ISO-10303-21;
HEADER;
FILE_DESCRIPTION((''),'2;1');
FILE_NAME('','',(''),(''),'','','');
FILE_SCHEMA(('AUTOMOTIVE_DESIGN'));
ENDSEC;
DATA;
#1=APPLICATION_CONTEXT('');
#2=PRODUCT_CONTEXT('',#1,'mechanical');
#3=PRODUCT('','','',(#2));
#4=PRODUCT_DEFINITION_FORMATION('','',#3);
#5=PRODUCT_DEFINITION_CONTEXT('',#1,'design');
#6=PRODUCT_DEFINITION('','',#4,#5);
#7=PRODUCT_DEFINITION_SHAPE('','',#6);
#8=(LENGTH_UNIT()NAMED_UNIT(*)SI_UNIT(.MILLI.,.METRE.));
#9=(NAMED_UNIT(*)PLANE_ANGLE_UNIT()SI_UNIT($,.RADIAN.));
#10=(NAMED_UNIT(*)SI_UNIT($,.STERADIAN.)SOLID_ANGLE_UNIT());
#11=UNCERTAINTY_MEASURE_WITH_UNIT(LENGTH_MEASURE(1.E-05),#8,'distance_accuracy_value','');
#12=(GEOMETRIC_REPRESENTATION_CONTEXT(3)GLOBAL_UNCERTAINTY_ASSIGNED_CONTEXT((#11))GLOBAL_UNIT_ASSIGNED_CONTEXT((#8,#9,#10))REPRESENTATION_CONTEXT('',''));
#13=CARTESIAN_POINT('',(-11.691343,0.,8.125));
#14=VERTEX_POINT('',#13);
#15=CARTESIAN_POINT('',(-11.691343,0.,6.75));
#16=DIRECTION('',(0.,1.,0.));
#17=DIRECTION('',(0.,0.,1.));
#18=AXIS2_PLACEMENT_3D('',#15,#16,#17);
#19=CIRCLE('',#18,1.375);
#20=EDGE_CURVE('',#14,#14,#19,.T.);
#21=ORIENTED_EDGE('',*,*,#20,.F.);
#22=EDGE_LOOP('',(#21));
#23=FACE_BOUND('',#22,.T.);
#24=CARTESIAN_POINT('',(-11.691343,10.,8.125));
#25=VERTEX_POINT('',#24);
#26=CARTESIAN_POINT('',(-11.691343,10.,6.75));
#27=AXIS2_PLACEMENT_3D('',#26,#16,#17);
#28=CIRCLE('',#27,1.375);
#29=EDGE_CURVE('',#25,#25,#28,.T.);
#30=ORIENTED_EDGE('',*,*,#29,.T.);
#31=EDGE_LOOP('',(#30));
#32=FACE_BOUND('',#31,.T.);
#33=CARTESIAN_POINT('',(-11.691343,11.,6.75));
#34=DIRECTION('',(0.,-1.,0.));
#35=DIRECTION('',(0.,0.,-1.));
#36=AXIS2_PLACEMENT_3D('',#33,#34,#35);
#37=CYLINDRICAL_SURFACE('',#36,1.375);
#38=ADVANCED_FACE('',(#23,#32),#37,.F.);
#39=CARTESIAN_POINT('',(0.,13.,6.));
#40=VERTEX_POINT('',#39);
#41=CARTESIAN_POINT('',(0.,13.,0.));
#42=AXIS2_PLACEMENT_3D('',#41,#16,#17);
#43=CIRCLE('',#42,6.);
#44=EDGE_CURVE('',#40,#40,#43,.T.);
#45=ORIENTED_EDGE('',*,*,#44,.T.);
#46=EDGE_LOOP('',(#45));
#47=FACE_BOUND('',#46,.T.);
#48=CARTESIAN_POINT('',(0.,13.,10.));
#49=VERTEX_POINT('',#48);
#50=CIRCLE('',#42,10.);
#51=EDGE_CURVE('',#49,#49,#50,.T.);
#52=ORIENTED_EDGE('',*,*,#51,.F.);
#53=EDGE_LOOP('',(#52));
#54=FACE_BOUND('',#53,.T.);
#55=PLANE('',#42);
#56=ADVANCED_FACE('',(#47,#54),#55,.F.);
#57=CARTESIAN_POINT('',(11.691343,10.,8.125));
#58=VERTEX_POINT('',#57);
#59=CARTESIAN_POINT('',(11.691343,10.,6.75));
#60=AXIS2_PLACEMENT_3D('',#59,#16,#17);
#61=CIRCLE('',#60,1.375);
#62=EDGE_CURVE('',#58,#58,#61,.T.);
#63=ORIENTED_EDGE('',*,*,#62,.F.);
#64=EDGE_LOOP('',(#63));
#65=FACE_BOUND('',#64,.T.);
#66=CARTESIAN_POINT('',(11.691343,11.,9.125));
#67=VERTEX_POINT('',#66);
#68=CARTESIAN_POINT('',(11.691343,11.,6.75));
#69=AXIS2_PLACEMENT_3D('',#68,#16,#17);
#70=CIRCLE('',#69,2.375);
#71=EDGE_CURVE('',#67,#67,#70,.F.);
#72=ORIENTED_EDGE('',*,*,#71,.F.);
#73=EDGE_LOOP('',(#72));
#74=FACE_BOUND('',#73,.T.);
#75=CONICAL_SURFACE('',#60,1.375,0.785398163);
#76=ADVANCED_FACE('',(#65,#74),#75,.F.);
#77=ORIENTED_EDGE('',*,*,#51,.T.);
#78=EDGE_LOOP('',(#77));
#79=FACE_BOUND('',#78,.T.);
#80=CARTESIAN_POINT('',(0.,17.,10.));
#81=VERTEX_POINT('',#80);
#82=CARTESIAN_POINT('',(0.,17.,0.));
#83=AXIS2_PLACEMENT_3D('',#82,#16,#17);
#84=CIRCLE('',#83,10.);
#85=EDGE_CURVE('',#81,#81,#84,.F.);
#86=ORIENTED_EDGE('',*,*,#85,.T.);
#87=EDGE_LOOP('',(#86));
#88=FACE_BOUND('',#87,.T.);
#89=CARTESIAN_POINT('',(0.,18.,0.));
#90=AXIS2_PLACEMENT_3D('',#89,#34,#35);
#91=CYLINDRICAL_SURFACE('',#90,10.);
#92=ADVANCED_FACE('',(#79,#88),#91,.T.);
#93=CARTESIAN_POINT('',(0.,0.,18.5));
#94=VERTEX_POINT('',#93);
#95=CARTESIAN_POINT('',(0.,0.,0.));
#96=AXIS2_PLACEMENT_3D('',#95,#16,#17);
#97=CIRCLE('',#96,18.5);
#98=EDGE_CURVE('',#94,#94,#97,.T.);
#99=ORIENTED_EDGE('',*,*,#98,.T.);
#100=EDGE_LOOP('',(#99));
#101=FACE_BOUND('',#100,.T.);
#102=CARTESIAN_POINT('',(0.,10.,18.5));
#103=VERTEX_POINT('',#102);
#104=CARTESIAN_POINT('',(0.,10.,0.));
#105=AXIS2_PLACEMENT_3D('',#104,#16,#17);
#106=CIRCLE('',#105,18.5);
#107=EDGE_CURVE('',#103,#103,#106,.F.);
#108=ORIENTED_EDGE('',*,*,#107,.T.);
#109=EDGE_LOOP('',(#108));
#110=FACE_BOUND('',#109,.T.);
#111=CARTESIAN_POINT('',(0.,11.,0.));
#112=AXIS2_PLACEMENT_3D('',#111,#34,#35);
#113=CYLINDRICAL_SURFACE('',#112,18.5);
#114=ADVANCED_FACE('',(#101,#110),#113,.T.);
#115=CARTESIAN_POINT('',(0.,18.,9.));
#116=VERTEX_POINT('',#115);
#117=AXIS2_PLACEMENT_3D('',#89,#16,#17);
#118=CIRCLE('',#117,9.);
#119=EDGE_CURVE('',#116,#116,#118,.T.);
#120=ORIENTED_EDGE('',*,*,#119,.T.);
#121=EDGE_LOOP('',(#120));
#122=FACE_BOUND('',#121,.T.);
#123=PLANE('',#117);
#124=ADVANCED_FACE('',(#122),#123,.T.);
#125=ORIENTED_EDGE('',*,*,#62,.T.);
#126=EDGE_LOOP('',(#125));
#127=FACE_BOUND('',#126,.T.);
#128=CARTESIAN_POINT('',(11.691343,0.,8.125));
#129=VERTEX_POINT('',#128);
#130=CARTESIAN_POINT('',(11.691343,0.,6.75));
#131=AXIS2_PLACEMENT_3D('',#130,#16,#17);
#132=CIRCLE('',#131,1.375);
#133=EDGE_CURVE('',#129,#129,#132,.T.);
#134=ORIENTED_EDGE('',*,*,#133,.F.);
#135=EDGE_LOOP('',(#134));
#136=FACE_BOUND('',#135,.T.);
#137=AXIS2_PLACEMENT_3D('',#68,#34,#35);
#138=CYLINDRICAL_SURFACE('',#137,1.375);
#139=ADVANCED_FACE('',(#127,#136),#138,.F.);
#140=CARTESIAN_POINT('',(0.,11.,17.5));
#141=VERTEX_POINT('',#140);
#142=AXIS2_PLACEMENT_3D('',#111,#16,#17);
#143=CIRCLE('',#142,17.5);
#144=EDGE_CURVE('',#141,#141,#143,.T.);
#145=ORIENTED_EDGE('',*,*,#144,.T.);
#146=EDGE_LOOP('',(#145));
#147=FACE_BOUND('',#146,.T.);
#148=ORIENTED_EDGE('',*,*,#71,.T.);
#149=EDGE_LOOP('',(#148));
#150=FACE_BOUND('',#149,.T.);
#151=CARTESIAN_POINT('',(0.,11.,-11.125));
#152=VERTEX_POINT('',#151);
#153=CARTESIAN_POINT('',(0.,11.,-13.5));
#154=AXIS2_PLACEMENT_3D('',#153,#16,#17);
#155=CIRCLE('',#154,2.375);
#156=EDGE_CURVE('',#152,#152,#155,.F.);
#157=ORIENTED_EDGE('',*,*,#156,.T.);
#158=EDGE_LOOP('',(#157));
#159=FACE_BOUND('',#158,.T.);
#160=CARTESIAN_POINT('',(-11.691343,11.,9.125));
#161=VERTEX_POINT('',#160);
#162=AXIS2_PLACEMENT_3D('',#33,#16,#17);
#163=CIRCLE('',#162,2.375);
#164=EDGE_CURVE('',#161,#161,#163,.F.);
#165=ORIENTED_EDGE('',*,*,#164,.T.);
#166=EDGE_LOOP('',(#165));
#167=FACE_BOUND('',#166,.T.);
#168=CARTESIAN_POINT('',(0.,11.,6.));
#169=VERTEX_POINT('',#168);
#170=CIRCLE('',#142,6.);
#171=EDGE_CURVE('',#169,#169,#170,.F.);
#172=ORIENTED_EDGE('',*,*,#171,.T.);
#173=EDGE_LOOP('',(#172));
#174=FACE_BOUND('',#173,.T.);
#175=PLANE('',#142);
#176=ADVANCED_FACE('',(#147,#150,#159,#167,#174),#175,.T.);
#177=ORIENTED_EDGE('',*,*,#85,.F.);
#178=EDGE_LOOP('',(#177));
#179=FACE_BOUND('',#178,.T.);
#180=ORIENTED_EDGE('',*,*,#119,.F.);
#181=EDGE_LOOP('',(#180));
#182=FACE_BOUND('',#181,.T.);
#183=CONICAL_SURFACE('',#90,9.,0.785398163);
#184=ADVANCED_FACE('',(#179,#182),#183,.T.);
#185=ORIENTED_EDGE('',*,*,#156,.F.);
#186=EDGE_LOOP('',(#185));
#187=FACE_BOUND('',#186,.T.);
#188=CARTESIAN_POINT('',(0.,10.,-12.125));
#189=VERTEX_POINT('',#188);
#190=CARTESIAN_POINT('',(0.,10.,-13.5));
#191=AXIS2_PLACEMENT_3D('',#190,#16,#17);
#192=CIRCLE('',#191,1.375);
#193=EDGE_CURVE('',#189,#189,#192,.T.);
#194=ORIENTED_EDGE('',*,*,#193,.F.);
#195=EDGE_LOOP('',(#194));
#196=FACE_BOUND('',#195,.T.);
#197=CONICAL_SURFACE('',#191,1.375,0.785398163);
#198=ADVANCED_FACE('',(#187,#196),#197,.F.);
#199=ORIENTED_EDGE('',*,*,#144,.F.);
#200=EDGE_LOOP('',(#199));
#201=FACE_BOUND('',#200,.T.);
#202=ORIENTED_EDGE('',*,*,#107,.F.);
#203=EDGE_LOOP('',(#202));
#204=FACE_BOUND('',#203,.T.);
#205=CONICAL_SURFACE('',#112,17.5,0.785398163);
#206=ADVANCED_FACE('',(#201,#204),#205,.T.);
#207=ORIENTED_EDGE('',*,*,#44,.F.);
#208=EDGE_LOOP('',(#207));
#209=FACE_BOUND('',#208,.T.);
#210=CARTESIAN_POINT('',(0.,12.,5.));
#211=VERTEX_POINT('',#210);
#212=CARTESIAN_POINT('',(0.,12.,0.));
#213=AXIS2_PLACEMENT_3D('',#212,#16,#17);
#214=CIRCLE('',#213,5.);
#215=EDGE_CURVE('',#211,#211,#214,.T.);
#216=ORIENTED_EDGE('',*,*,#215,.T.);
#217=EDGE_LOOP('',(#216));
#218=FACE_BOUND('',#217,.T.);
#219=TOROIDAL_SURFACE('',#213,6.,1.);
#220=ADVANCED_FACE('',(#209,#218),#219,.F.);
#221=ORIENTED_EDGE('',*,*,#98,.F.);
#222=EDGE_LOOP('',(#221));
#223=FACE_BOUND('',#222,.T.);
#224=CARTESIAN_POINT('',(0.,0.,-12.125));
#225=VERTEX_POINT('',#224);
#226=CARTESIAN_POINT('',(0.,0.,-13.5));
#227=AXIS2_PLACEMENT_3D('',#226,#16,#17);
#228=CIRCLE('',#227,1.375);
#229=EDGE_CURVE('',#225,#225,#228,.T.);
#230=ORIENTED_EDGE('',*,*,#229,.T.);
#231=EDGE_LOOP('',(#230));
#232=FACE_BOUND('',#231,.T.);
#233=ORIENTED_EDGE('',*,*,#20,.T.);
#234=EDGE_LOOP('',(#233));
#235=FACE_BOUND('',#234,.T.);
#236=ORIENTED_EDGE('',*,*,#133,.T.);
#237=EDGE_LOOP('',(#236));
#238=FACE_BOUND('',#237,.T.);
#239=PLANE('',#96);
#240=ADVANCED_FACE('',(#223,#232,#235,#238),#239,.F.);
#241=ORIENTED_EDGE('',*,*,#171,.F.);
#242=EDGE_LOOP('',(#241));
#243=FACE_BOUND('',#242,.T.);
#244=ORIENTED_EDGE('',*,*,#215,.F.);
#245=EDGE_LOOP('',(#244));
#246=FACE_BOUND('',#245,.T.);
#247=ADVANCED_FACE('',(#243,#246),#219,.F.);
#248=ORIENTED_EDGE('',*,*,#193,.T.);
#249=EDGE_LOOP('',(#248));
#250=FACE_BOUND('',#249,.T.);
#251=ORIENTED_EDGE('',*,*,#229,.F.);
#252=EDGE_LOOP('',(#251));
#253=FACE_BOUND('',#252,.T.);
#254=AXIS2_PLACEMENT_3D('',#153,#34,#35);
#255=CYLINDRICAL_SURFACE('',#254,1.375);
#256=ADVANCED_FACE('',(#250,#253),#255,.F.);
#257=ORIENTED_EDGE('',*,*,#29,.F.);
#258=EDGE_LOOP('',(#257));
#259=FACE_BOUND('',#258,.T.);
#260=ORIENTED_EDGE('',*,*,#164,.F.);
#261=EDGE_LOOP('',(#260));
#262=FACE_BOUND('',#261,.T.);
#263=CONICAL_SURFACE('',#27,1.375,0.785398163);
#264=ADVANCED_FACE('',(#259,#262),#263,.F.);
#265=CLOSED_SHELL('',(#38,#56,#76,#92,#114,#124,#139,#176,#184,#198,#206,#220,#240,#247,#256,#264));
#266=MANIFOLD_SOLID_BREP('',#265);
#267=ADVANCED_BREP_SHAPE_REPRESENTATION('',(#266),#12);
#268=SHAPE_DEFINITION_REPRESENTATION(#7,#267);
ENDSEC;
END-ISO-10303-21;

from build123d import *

# Parameters (mm, degrees)
SKETCH2_R           = 18.5
SKETCH2_R_2         = 1.375
BOSS_EXTRUDE1_DEPTH = 11
SKETCH4_R           = 5
BOSS_EXTRUDE3_DEPTH = 2
SKETCH5_R           = 10
BOSS_EXTRUDE4_DEPTH = 5
FILLET1_R           = 1
CHAMFER3_SIZE       = 1
CHAMFER4_SIZE       = 1


with BuildPart() as part:
    # Sketch2 → Boss-Extrude1 (new body)
    with BuildSketch(Plane(origin=(0, 0, 0), x_dir=(1, 0, 0), z_dir=(0, 1, 0))):
        with Locations(Location((0, 0, 0), (0, 0, 270))):
            Circle(SKETCH2_R)
        with Locations(Location((0, 13.5, 0), (0, 0, 270))):
            Circle(SKETCH2_R_2, mode=Mode.SUBTRACT)
        with Locations(Location((-11.691342951, -6.75, 0), (0, 0, 270))):
            Circle(SKETCH2_R_2, mode=Mode.SUBTRACT)
        with Locations(Location((11.691342951, -6.75, 0), (0, 0, 270))):
            Circle(SKETCH2_R_2, mode=Mode.SUBTRACT)
    extrude(amount=BOSS_EXTRUDE1_DEPTH)

    # Sketch4 → Boss-Extrude3 (add)
    with BuildSketch(Plane(origin=(0, 11, 0), x_dir=(1, 0, 0), z_dir=(0, 1, 0))):
        with Locations(Location((0, 0, 0), (0, 0, 270))):
            Circle(SKETCH4_R)
    extrude(amount=BOSS_EXTRUDE3_DEPTH)

    # Sketch5 → Boss-Extrude4 (add)
    with BuildSketch(Plane(origin=(0, 13, 0), x_dir=(1, 0, 0), z_dir=(0, 1, 0))):
        with Locations(Location((0, 0, 0), (0, 0, 270))):
            Circle(SKETCH5_R)
    extrude(amount=BOSS_EXTRUDE4_DEPTH)

    # Fillet1
    fillet1_edges = [part.edges().sort_by_distance(p)[0] for p in [
        (0, 11, -5),
        (0, 13, -5),
    ]]
    fillet(fillet1_edges, radius=FILLET1_R - 0.0001)  # a hair under: the kernel refuses the full size

    # Chamfer3
    chamfer3_edges = [part.edges().sort_by_distance(p)[0] for p in [
        (11.691342951, 11, 5.375),
        (0, 11, -14.875),
        (-11.691342951, 11, 5.375),
    ]]
    chamfer(chamfer3_edges, length=CHAMFER3_SIZE)

    # Chamfer4
    chamfer4_edges = [part.edges().sort_by_distance(p)[0] for p in [
        (0, 18, -10),
        (0, 11, -18.5),
    ]]
    chamfer(chamfer4_edges, length=CHAMFER4_SIZE)


solid = part.part
